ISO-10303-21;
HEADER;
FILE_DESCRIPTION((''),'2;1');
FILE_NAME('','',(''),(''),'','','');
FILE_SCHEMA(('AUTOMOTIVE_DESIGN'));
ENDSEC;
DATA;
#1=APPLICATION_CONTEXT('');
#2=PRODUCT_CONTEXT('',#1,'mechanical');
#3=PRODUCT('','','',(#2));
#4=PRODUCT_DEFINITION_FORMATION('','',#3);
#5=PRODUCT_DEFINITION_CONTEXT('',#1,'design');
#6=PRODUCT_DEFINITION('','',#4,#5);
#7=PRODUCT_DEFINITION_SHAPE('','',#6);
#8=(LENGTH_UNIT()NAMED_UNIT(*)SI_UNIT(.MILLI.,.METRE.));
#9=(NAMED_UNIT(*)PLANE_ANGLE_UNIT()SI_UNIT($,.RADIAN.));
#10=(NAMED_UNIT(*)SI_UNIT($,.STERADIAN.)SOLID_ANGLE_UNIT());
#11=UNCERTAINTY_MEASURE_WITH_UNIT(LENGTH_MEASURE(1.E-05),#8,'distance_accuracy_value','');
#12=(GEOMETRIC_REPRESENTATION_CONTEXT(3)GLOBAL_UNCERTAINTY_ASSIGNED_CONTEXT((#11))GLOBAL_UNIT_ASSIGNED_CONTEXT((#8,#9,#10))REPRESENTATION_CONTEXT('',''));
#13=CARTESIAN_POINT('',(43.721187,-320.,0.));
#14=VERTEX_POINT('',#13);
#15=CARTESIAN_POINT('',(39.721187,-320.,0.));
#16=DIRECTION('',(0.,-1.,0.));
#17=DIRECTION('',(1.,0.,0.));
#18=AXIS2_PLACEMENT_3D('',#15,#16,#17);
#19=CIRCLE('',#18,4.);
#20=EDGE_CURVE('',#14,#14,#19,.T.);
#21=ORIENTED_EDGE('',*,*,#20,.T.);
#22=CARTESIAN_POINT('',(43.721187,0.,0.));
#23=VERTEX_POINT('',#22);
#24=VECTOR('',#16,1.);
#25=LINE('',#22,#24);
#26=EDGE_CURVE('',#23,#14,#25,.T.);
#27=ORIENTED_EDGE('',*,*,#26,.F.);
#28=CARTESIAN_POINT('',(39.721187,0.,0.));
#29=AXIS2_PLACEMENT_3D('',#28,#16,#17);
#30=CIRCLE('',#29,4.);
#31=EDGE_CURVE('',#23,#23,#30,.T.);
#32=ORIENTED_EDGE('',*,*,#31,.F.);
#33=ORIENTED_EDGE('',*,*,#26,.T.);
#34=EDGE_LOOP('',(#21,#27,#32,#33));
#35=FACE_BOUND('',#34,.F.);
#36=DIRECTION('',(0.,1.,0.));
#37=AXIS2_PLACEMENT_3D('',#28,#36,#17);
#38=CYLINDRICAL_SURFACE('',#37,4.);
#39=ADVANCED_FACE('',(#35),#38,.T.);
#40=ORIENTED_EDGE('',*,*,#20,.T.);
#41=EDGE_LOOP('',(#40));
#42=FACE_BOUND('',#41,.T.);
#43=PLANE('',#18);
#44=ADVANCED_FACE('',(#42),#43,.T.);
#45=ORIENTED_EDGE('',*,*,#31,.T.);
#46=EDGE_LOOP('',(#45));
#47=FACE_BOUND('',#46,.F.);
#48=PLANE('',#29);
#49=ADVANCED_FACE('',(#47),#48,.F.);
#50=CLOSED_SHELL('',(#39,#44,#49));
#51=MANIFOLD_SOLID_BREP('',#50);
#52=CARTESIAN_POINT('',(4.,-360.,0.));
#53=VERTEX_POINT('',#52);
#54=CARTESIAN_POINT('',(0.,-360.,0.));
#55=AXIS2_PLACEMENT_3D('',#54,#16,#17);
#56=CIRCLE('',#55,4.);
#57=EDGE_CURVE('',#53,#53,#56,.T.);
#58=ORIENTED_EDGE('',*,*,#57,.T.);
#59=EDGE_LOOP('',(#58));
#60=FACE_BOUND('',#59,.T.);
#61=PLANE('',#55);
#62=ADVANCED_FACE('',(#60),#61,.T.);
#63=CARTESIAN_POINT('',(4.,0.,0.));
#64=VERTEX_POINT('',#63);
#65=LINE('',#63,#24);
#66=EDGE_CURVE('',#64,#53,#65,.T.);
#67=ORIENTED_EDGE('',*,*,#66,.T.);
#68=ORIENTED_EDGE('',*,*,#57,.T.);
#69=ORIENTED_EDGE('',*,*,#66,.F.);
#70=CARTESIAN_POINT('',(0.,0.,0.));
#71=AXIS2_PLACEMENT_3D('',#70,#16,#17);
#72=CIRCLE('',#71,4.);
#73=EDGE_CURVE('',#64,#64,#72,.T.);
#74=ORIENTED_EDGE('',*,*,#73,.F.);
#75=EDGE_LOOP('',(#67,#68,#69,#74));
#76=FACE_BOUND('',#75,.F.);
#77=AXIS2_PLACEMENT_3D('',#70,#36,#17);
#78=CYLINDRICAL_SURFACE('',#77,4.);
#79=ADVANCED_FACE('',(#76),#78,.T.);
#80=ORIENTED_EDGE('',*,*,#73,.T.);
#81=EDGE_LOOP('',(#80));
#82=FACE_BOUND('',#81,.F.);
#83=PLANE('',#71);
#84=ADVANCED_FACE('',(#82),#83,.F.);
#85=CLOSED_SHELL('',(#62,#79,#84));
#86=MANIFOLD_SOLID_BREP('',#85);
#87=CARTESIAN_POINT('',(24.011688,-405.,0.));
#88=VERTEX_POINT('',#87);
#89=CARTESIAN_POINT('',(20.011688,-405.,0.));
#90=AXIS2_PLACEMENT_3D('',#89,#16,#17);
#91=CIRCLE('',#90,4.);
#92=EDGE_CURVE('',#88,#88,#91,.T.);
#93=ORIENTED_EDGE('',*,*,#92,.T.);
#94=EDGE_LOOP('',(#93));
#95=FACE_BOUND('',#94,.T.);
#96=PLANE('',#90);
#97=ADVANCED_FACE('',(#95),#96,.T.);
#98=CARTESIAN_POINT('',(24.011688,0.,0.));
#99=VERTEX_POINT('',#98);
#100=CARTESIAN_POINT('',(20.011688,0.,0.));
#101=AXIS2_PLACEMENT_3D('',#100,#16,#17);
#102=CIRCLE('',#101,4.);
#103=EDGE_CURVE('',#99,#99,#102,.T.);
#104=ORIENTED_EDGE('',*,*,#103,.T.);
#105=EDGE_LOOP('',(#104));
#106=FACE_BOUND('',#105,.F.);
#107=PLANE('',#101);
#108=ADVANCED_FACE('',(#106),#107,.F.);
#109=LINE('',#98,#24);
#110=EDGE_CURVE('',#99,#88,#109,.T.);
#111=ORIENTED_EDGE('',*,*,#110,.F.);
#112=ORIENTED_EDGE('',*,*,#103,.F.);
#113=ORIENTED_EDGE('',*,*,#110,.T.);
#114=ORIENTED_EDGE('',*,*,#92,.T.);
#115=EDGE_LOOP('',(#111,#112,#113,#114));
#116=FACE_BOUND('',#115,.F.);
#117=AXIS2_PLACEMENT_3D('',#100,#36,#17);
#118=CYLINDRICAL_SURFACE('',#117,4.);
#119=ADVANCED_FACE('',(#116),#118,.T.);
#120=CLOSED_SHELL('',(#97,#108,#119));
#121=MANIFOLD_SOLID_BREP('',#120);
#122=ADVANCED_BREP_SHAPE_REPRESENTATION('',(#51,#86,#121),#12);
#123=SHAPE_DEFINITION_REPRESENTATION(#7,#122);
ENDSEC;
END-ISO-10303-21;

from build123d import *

# Parameters (mm, degrees)
F0_R     = 4
F1_DEPTH = 360
F2_R     = 4
F3_DEPTH = 405
F4_R     = 4
F5_DEPTH = 320


# Not quite as in the source:
# - a feature of the source that left no trace in its solid (it failed there, or was rolled back) is left out


with BuildPart() as f1:
    # F0 (on Front) → F1 (new body)
    with BuildSketch(Plane.XZ):
        Circle(F0_R)
    extrude(amount=F1_DEPTH)


with BuildPart() as f3:
    # F2 (on Front) → F3 (new body)
    with BuildSketch(Plane.XZ):
        with Locations((20.0116876513, 0)):
            Circle(F2_R)
    extrude(amount=F3_DEPTH)


with BuildPart() as f5:
    # F4 (on Front) → F5 (new body)
    with BuildSketch(Plane.XZ):
        with Locations((39.7211872041, 0)):
            Circle(F4_R)
    extrude(amount=F5_DEPTH)


solid = Compound([f1.part, f3.part, f5.part])
